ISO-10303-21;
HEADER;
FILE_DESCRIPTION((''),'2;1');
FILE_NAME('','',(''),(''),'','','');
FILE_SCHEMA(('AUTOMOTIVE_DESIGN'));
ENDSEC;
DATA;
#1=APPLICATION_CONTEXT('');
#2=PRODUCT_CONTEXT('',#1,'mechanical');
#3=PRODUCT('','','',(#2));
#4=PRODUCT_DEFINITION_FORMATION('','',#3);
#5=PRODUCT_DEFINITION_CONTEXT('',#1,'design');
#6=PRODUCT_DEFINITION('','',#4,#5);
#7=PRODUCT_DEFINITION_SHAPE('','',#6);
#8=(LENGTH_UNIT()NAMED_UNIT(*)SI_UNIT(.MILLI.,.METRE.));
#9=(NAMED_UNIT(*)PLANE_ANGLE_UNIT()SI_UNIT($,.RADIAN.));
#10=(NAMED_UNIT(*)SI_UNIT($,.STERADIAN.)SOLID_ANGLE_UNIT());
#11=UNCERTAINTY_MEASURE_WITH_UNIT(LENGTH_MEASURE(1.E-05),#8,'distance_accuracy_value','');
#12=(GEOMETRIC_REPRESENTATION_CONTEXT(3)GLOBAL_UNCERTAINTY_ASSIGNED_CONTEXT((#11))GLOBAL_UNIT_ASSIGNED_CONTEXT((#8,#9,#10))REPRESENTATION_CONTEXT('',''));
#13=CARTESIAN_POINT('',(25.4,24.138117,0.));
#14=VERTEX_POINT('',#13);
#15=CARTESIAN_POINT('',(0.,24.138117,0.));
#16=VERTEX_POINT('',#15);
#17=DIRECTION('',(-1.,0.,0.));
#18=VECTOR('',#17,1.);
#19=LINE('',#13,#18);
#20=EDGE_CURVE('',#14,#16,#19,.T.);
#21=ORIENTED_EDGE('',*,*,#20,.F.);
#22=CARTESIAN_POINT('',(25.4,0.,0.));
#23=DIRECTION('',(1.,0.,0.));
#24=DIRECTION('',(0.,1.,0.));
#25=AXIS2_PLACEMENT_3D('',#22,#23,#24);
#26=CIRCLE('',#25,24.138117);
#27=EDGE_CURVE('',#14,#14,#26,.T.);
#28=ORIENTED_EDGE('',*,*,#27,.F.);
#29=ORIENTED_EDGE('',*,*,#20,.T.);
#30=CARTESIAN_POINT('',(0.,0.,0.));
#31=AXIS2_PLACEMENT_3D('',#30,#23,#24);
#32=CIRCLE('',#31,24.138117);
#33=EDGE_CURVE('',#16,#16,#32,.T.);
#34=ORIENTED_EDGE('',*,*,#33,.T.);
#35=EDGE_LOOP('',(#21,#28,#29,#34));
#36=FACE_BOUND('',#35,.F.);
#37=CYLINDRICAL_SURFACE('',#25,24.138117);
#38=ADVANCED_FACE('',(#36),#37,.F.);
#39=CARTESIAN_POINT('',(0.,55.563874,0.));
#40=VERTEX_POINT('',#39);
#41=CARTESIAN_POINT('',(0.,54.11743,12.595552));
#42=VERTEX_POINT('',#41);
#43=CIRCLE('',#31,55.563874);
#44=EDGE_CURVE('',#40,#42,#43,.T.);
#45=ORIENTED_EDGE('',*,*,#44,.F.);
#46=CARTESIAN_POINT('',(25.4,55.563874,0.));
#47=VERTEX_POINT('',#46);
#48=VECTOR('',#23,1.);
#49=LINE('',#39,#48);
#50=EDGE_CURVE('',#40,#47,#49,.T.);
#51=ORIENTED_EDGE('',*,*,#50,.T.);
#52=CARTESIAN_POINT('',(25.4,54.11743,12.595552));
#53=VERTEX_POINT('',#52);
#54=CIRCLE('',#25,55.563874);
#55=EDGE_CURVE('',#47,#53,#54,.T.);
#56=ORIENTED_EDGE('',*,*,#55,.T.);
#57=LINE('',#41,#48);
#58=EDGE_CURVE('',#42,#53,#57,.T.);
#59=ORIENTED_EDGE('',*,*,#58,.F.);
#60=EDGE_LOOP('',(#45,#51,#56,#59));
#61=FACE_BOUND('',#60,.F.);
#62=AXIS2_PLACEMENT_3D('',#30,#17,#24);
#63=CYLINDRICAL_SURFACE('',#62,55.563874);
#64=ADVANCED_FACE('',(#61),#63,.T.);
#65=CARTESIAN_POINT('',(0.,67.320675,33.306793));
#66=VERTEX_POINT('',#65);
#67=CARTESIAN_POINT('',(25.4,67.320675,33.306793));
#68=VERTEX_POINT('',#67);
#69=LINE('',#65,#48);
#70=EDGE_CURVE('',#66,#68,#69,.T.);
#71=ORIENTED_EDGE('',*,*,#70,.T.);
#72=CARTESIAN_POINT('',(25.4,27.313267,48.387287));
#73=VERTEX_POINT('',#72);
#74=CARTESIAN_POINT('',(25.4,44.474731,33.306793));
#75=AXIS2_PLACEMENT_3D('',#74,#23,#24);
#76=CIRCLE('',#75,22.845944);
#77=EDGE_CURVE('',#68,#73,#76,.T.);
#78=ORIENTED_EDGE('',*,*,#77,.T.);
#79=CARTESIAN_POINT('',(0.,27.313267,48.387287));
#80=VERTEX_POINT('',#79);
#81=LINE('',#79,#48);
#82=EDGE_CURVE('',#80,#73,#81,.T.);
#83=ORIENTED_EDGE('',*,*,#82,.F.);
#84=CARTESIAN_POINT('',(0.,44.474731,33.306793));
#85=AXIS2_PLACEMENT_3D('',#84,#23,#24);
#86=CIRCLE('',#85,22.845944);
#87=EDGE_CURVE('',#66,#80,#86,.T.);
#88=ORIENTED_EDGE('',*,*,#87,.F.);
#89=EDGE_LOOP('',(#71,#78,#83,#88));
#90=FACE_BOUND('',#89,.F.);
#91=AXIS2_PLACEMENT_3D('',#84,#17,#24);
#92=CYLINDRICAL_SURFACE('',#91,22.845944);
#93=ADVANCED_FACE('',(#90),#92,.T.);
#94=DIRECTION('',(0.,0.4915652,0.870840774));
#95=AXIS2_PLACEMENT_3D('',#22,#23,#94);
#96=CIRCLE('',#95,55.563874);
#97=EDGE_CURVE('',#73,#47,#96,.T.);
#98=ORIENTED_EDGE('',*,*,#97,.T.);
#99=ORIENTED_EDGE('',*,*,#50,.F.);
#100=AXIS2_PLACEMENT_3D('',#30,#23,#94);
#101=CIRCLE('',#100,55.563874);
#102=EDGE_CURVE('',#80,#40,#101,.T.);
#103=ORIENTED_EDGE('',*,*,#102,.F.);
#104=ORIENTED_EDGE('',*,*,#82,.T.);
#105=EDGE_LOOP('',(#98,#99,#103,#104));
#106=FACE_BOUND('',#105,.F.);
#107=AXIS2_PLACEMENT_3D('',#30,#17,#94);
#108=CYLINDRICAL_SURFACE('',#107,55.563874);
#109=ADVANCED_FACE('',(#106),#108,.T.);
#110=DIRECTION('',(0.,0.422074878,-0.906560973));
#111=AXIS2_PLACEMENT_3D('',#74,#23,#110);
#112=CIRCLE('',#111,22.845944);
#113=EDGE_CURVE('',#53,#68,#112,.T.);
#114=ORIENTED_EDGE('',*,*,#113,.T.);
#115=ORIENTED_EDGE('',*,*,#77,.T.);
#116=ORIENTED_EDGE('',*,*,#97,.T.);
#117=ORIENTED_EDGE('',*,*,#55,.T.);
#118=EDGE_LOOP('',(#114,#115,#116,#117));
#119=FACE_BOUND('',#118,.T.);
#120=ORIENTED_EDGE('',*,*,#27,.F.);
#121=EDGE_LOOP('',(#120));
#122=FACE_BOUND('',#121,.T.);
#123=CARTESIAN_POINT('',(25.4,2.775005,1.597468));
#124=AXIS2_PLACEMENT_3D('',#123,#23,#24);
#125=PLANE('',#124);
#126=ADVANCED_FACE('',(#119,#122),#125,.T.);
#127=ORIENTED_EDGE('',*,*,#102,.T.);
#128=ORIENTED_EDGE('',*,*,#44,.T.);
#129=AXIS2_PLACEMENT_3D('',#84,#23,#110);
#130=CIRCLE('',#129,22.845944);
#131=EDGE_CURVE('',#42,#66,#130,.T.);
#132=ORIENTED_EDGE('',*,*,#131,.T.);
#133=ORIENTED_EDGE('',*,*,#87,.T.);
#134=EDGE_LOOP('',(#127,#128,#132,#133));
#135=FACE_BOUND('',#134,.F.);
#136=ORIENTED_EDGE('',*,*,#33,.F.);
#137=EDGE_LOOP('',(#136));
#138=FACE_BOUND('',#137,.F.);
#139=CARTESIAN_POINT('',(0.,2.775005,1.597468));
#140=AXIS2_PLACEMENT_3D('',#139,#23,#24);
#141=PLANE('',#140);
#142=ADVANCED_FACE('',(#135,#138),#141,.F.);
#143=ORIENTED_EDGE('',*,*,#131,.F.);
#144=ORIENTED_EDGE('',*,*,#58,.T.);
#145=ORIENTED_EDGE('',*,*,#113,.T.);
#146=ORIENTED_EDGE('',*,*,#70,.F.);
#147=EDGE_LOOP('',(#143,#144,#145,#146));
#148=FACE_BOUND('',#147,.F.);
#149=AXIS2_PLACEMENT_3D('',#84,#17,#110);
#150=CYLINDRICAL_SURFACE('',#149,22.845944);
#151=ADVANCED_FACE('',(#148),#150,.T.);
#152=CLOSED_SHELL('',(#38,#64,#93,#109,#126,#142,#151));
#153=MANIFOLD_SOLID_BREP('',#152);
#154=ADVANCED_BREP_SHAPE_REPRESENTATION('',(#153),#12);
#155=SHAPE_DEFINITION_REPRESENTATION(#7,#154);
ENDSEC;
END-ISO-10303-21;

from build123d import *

# Parameters (mm, degrees)
F1_DEPTH = 25.4
F3_R     = 24.1381170573
F4_DEPTH = 25.4


# Not quite as in the source:
# - the program builds the solid bodies; features that only make, move or delete a surface that nothing else refers to are left out


with BuildPart() as f1:
    # F0 (on Right) → F1 (new body)
    with BuildSketch(Plane.YZ):
        with BuildLine():
            ThreePointArc((27.3132670653, 48.3872874563), (-47.984242661, -28.0152922777), (55.5638744614, 0))
            ThreePointArc((55.5638744614, 0), (55.2010789182, 6.3391664614), (54.1174299211, 12.5955517503))
            ThreePointArc((54.1174299211, 12.5955517503), (26.1882593397, 19.6121913174), (27.3132670653, 48.3872874563))
        make_face()
        with BuildLine():
            ThreePointArc((27.3132670653, 48.3872874563), (26.1882593397, 19.6121913174), (54.1174299211, 12.5955517503))
            ThreePointArc((54.1174299211, 12.5955517503), (44.4747309057, 33.3067929411), (27.3132670653, 48.3872874563))
        make_face()
        with BuildLine():
            ThreePointArc((27.3132670653, 48.3872874563), (44.4747309057, 33.3067929411), (54.1174299211, 12.5955517503))
            ThreePointArc((54.1174299211, 12.5955517503), (63.739124452, 21.0259013912), (67.3206748777, 33.3067929411))
            ThreePointArc((67.3206748777, 33.3067929411), (52.5328732039, 54.6844330979), (27.3132670653, 48.3872874563))
        make_face()
    extrude(amount=F1_DEPTH)

    # F3 (on face) → F4 (cut)
    with BuildSketch(Plane.YZ.offset(25.4)):
        Circle(F3_R)
    extrude(amount=-F4_DEPTH, mode=Mode.SUBTRACT)


solid = f1.part
